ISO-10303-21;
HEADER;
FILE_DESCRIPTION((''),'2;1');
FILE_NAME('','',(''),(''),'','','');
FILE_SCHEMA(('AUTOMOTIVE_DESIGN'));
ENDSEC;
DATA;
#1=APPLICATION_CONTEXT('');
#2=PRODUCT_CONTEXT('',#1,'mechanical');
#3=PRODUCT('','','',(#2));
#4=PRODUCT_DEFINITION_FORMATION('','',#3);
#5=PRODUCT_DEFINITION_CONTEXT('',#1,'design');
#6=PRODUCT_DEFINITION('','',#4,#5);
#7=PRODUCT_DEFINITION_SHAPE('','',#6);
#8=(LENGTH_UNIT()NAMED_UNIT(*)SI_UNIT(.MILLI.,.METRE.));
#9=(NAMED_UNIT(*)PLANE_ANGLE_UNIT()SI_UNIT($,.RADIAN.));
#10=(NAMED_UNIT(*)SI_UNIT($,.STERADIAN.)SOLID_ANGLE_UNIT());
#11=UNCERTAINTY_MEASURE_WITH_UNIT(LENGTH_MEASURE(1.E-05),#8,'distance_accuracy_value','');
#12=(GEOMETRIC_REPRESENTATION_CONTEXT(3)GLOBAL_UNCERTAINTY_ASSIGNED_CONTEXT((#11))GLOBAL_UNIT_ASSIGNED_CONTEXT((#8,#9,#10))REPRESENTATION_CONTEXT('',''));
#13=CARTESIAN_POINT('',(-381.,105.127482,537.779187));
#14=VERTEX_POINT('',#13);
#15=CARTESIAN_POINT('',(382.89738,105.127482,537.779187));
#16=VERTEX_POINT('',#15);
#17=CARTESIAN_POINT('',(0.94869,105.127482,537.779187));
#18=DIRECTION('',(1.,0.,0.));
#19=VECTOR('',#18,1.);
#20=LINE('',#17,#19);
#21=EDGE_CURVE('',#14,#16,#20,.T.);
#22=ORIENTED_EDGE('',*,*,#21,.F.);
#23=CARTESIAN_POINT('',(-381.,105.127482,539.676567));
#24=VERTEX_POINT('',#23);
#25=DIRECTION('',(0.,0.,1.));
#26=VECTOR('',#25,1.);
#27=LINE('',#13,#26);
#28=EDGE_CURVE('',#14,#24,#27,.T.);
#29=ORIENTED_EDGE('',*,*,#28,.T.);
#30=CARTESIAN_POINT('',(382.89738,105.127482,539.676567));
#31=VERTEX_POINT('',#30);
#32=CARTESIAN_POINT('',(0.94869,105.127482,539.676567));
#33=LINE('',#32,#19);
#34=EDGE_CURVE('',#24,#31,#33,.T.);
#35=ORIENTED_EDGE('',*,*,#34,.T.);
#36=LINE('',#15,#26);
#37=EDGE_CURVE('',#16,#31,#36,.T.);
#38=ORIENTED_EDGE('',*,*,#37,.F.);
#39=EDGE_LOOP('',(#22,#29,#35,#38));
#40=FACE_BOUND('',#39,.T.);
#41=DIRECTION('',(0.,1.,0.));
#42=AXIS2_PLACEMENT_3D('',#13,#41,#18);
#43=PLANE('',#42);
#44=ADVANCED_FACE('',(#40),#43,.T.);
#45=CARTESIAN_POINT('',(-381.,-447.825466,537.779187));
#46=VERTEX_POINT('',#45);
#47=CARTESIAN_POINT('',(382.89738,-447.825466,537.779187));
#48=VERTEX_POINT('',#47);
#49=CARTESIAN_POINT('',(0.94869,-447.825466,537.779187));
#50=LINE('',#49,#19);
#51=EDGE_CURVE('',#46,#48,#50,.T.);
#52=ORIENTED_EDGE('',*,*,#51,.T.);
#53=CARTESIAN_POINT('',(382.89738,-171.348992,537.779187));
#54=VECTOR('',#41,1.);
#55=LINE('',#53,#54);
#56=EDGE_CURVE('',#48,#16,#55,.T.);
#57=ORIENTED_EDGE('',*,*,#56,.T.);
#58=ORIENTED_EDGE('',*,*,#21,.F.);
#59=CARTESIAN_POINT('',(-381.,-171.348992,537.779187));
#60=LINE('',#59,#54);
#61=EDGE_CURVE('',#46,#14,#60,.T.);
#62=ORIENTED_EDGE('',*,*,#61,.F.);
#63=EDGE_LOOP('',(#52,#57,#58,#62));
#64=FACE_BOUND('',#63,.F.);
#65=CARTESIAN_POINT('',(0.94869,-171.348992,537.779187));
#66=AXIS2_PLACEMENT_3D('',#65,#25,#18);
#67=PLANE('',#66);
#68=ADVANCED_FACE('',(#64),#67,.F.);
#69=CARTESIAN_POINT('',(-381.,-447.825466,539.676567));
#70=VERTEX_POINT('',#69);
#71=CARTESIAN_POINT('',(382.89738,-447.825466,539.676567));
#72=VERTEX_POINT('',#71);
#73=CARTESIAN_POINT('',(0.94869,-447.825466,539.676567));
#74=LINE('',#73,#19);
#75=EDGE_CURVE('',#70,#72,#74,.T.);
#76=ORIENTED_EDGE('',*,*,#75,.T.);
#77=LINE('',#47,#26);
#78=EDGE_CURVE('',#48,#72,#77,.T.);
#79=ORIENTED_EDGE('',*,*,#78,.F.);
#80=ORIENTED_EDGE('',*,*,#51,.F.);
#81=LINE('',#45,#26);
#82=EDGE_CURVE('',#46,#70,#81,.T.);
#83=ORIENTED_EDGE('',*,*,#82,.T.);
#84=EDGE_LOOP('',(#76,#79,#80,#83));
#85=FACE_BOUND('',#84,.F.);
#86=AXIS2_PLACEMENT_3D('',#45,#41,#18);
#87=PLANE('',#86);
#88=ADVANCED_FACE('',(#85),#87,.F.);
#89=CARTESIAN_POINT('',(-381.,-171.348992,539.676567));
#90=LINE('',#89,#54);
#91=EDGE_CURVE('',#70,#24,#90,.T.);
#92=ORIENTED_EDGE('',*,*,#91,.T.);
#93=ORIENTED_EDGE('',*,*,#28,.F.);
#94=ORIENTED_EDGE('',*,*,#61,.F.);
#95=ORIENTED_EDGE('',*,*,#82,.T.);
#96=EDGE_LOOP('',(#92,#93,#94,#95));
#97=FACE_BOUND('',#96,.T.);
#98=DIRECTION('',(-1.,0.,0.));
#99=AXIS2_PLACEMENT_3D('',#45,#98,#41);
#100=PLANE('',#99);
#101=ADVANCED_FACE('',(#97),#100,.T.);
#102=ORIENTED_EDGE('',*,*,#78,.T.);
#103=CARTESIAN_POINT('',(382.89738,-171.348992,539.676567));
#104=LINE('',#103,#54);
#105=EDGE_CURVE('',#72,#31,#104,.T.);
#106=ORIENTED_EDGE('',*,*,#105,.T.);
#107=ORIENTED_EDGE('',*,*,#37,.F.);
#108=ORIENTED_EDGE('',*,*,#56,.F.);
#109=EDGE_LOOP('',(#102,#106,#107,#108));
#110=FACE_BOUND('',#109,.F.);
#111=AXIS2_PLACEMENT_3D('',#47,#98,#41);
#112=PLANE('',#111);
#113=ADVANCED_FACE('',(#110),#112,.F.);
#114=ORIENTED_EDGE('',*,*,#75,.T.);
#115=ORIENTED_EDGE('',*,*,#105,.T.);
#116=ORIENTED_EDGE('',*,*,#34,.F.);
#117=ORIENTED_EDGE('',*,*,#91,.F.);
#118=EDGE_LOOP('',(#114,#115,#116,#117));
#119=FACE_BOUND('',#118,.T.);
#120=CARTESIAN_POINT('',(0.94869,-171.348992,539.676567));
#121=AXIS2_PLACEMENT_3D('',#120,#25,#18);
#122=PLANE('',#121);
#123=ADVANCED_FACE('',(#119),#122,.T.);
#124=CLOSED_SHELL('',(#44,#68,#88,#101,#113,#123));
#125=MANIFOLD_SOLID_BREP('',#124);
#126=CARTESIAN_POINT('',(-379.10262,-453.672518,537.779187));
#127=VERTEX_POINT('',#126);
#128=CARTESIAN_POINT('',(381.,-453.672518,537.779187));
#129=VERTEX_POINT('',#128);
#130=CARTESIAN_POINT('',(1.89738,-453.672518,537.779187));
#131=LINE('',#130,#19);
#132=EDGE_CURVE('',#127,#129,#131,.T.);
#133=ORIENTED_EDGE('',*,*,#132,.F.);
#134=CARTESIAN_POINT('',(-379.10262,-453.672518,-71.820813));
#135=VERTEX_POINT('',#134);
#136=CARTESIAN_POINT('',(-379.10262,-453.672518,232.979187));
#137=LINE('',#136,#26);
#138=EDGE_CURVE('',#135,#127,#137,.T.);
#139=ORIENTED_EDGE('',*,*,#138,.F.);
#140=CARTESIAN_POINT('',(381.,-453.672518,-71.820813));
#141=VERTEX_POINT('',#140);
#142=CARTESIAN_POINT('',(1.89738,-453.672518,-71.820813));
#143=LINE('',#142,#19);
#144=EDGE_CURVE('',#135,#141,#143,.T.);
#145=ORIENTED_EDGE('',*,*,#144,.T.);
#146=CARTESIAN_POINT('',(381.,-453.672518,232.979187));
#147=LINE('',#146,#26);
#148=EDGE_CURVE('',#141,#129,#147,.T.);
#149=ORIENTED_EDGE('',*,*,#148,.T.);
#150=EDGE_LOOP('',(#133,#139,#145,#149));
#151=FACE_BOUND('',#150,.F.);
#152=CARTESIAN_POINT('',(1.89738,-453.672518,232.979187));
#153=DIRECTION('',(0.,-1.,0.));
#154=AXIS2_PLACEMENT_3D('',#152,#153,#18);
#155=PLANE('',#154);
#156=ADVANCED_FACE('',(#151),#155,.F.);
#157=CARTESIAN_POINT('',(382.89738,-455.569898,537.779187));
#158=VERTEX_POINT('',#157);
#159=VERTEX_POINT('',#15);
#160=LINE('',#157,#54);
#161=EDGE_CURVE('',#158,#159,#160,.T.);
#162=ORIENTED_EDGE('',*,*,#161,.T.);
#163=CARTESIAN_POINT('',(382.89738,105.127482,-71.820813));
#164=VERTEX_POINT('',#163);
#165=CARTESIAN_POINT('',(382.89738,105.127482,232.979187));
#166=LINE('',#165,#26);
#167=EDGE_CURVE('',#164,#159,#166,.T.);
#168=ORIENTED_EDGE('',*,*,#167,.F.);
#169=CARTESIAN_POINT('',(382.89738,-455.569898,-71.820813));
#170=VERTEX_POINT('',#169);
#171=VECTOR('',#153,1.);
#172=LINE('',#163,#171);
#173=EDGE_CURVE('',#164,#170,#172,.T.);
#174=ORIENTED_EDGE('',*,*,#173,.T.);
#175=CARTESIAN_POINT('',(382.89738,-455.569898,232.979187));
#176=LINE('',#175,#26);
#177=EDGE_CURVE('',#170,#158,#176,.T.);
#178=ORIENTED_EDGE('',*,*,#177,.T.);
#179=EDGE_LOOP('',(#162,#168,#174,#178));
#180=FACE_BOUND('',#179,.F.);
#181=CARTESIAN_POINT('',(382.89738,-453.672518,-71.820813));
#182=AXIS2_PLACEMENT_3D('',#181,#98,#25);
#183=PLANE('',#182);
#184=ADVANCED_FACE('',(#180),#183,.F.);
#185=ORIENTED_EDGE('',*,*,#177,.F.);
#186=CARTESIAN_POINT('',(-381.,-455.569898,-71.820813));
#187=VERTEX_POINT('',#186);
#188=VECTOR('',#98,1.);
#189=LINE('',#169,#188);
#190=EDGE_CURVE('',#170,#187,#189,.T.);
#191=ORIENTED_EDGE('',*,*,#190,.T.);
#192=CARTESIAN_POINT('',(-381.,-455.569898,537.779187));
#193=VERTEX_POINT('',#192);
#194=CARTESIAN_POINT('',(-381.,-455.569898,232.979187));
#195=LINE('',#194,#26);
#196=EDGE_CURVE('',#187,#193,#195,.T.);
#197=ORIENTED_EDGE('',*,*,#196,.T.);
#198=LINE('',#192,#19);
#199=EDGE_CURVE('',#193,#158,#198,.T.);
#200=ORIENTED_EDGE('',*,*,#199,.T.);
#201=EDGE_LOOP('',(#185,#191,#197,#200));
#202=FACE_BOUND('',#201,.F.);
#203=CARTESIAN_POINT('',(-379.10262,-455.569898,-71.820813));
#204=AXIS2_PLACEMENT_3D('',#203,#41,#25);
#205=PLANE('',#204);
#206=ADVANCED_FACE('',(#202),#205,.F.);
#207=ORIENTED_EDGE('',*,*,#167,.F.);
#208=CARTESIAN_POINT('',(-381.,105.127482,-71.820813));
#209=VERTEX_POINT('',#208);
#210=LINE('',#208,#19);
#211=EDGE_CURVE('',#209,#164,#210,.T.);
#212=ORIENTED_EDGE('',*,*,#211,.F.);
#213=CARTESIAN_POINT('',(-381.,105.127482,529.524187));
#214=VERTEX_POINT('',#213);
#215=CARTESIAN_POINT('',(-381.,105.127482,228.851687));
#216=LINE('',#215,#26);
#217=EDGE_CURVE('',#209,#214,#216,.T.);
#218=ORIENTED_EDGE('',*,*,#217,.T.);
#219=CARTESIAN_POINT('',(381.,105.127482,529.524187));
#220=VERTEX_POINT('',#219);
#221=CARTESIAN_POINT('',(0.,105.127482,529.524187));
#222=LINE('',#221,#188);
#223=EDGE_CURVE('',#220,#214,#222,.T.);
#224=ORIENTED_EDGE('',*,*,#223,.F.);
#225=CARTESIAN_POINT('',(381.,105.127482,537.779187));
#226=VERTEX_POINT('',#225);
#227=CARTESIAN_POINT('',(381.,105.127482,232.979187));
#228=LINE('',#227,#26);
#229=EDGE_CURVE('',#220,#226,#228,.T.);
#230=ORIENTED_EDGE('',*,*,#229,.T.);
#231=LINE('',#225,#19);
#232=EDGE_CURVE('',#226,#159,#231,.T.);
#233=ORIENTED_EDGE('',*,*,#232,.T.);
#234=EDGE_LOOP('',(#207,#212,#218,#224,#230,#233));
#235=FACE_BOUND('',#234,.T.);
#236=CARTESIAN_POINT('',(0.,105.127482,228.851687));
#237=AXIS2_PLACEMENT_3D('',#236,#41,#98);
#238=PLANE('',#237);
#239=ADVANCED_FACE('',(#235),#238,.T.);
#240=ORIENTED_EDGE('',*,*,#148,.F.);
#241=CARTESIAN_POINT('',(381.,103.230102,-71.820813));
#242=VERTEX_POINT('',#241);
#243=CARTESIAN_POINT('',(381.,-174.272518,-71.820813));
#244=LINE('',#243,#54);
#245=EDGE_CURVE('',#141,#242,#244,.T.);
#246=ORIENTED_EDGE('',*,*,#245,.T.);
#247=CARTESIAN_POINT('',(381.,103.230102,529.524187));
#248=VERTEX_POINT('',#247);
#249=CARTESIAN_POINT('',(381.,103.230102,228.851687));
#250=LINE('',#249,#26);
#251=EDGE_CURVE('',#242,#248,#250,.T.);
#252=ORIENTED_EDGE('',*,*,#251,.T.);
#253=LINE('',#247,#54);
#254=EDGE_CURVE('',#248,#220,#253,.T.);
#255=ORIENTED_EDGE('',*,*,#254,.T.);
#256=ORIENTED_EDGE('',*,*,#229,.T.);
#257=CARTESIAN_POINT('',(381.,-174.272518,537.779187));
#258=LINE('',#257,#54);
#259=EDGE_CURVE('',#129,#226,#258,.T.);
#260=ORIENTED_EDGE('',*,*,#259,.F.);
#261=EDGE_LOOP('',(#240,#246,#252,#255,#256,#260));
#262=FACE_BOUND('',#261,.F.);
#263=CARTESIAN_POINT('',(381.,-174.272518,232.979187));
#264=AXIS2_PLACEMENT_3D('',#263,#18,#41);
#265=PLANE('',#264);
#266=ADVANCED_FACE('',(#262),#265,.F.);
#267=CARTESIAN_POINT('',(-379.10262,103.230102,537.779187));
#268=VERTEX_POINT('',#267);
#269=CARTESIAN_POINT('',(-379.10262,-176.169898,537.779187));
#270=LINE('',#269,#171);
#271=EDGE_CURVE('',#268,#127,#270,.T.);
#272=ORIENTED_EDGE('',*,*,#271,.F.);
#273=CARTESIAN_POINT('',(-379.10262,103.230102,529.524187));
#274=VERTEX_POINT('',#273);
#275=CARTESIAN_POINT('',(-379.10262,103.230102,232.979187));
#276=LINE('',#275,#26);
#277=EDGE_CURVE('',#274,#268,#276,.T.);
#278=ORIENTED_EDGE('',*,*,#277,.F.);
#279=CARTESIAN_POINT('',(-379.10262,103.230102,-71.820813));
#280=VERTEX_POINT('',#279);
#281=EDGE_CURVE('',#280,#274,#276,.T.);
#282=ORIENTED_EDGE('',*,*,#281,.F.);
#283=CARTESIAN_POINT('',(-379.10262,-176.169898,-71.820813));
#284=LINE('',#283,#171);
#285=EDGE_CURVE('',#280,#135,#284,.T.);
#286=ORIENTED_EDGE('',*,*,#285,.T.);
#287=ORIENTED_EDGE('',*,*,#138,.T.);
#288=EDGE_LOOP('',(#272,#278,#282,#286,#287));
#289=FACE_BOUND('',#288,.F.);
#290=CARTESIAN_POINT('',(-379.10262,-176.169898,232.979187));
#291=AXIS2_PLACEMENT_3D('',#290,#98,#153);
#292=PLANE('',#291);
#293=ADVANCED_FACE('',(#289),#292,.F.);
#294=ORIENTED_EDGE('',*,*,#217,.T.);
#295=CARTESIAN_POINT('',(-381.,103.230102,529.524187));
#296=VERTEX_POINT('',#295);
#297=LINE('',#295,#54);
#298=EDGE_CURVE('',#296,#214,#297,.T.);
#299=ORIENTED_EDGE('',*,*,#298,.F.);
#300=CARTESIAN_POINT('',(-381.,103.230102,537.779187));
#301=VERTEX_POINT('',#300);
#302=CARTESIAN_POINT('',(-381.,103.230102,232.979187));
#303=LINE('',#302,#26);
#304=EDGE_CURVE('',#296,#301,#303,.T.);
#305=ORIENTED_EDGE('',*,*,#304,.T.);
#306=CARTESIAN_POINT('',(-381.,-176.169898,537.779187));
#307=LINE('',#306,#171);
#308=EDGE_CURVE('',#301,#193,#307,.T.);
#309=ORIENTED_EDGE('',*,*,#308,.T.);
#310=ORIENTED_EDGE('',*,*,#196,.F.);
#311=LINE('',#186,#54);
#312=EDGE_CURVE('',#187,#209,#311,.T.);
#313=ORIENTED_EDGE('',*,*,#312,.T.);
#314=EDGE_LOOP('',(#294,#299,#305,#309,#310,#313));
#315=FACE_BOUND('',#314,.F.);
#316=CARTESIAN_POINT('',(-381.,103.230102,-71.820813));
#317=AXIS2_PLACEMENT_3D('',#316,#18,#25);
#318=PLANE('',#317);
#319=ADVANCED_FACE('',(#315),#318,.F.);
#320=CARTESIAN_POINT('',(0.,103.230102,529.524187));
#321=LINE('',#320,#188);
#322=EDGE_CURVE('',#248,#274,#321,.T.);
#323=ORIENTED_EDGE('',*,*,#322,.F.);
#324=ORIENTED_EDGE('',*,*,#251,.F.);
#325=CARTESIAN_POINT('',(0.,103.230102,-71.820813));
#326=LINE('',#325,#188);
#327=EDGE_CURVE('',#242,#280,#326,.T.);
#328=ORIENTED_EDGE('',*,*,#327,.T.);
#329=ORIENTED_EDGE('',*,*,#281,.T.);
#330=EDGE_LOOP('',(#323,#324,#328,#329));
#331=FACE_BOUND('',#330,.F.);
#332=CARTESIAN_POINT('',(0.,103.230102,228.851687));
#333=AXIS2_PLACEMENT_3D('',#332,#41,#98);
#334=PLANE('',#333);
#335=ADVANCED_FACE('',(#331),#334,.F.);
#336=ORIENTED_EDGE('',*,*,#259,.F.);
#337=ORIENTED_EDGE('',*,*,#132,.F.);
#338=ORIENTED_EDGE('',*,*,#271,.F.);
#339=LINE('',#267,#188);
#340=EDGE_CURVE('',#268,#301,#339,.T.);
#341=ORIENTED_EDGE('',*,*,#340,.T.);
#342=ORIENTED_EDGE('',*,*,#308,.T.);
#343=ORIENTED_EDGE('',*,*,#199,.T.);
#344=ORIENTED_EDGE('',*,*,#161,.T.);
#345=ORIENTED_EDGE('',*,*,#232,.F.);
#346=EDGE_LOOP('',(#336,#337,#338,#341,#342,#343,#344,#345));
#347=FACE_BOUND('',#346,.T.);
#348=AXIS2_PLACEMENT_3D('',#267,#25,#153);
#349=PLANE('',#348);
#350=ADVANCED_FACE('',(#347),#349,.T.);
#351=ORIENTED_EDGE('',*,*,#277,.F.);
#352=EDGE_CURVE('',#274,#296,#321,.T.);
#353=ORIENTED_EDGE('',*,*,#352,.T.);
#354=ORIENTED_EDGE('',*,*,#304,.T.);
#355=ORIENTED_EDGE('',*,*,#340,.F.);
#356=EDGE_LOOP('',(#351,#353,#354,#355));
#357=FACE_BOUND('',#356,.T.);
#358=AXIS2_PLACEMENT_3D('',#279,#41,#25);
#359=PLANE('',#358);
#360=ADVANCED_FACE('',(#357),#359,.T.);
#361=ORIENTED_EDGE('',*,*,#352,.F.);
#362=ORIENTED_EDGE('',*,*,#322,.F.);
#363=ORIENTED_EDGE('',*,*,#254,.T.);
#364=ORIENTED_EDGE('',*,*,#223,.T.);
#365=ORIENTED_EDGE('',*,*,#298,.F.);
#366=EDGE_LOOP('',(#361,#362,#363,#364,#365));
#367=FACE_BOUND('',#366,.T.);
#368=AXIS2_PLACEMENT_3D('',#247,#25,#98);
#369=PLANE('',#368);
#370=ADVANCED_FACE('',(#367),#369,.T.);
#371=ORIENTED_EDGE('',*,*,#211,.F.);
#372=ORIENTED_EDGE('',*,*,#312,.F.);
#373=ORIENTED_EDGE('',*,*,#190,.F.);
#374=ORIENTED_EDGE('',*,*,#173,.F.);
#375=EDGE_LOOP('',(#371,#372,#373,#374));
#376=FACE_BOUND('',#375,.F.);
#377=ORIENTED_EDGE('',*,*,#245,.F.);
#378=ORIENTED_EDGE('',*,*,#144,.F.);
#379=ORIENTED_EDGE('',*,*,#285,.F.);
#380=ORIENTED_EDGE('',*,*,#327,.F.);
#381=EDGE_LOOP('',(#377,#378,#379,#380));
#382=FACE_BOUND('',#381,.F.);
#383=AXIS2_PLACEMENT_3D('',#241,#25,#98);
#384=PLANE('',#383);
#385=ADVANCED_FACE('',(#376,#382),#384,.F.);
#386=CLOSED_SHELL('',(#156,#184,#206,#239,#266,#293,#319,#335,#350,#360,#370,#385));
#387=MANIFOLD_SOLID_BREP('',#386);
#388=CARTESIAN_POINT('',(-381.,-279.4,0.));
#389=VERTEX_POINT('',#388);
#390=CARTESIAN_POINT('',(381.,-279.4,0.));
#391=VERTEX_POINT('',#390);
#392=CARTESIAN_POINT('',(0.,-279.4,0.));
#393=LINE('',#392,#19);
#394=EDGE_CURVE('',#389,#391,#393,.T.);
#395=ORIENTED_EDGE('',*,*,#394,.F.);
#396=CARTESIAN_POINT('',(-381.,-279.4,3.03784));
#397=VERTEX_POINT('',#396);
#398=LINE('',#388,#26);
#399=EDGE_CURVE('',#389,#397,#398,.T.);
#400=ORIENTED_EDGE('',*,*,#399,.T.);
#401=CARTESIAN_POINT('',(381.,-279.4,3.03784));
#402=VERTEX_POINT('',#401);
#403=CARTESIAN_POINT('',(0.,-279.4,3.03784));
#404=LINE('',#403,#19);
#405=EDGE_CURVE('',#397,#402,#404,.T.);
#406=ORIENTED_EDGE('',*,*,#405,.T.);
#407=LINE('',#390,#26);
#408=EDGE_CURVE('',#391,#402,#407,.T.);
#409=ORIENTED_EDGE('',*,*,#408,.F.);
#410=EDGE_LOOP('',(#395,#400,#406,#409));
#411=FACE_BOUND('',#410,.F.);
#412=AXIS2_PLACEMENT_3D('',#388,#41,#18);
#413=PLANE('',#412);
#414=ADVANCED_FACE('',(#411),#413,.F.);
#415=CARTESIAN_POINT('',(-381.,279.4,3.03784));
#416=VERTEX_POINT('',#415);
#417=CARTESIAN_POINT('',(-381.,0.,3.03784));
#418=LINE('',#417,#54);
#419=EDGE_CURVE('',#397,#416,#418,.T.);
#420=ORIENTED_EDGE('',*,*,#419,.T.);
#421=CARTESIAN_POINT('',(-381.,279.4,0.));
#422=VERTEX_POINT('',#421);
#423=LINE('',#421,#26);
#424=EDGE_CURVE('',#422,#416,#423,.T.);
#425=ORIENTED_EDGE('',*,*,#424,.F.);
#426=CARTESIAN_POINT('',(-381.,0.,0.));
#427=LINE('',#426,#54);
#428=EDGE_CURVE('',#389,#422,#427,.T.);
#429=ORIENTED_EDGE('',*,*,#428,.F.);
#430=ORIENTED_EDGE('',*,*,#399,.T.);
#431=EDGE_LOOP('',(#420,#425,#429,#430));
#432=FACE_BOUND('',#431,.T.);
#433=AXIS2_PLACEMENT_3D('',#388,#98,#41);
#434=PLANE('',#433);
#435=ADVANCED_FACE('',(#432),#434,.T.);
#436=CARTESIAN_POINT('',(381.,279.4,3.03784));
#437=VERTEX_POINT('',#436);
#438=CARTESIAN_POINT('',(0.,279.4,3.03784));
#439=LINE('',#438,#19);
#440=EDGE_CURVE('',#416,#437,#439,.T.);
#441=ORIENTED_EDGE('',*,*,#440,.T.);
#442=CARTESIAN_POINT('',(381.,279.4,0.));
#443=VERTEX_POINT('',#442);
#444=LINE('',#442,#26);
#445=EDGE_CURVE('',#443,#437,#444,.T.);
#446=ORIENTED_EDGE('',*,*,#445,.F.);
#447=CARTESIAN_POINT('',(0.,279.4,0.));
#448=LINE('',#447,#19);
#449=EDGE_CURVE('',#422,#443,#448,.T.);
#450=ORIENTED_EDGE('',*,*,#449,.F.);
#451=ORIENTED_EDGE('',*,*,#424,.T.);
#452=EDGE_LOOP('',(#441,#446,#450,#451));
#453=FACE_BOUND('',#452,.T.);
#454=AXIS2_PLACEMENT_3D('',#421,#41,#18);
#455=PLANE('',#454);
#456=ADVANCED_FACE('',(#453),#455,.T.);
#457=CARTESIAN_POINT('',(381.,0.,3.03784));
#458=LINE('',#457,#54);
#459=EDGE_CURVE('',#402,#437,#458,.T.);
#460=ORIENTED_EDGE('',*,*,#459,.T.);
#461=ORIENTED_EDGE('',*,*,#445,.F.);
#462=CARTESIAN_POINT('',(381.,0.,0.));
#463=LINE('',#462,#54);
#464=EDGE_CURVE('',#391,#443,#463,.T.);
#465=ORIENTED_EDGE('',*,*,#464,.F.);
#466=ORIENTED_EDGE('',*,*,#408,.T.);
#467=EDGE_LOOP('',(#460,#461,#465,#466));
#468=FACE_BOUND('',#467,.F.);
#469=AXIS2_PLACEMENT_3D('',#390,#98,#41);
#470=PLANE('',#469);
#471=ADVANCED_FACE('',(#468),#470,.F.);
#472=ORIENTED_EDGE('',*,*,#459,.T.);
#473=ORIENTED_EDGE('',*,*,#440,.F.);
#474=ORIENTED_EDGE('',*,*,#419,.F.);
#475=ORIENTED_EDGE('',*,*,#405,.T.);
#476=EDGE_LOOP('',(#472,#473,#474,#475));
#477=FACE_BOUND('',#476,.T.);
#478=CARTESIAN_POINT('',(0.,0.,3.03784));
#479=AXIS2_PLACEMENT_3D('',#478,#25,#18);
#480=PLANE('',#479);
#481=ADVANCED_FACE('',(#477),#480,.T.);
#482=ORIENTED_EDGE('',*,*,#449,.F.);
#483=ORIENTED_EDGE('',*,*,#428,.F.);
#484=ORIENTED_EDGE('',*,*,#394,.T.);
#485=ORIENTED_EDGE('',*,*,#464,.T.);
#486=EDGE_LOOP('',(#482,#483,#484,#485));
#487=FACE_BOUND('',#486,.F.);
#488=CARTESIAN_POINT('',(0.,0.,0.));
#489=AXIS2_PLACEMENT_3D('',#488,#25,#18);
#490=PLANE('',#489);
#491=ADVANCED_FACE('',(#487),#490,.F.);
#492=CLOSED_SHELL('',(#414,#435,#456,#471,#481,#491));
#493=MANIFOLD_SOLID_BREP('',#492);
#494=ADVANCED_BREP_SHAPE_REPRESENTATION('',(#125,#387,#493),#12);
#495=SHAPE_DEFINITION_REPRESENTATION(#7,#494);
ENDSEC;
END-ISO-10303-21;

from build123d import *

# Parameters (mm, degrees)
F0_W      = 762
F0_H      = 558.8
F1_DEPTH  = 3.03784
F2_W      = 558.8
F2_H      = 609.6
F3_DEPTH  = 1.89738
F4_W      = 762
F4_H      = 609.6
F5_DEPTH  = 1.89738
F6_W      = 558.8
F6_H      = 609.6
F7_DEPTH  = 1.89738
F8_W      = 762
F8_H      = 601.345
F9_DEPTH  = 1.89738
F10_W     = 763.89738
F10_H     = 552.9529485043
F11_DEPTH = 1.89738


with BuildPart() as f1:
    # F0 (on Top) → F1 (new body)
    with BuildSketch(Plane.XY):
        Rectangle(F0_W, F0_H)
    extrude(amount=F1_DEPTH)


with BuildPart() as f3:
    # F2 (on face) → F3 (new body)
    with BuildSketch(Plane.YZ.offset(381)):
        with Locations((-174.2725175381, 232.979187201)):
            Rectangle(F2_W, F2_H)
    extrude(amount=F3_DEPTH)

    # F4 (on face) → F5 (join)
    with BuildSketch(Plane.XZ.offset(453.6725175381)):
        with Locations((1.89738, 232.979187201)):
            Rectangle(F4_W, F4_H)
    extrude(amount=F5_DEPTH)

    # F6 (on face) → F7 (join)
    with BuildSketch(Plane(origin=(-379.10262, 0, 0), x_dir=(0, -1, 0), z_dir=(-1, 0, 0))):
        with Locations((176.1698975381, 232.979187201)):
            Rectangle(F6_W, F6_H)
    extrude(amount=F7_DEPTH)

    # F8 (on face) → F9 (join)
    with BuildSketch(Plane(origin=(0, 103.2301024619, 0), x_dir=(-1, 0, 0), z_dir=(0, 1, 0))):
        with Locations((0, 228.851687201)):
            Rectangle(F8_W, F8_H)
    extrude(amount=F9_DEPTH)


with BuildPart() as f11:
    # F10 (on face) → F11 (new body)
    with BuildSketch(Plane.XY.offset(537.779187201)):
        with Locations((0.94869, -171.3489917902)):
            Rectangle(F10_W, F10_H)
    extrude(amount=F11_DEPTH)


solid = Compound([f1.part, f3.part, f11.part])
